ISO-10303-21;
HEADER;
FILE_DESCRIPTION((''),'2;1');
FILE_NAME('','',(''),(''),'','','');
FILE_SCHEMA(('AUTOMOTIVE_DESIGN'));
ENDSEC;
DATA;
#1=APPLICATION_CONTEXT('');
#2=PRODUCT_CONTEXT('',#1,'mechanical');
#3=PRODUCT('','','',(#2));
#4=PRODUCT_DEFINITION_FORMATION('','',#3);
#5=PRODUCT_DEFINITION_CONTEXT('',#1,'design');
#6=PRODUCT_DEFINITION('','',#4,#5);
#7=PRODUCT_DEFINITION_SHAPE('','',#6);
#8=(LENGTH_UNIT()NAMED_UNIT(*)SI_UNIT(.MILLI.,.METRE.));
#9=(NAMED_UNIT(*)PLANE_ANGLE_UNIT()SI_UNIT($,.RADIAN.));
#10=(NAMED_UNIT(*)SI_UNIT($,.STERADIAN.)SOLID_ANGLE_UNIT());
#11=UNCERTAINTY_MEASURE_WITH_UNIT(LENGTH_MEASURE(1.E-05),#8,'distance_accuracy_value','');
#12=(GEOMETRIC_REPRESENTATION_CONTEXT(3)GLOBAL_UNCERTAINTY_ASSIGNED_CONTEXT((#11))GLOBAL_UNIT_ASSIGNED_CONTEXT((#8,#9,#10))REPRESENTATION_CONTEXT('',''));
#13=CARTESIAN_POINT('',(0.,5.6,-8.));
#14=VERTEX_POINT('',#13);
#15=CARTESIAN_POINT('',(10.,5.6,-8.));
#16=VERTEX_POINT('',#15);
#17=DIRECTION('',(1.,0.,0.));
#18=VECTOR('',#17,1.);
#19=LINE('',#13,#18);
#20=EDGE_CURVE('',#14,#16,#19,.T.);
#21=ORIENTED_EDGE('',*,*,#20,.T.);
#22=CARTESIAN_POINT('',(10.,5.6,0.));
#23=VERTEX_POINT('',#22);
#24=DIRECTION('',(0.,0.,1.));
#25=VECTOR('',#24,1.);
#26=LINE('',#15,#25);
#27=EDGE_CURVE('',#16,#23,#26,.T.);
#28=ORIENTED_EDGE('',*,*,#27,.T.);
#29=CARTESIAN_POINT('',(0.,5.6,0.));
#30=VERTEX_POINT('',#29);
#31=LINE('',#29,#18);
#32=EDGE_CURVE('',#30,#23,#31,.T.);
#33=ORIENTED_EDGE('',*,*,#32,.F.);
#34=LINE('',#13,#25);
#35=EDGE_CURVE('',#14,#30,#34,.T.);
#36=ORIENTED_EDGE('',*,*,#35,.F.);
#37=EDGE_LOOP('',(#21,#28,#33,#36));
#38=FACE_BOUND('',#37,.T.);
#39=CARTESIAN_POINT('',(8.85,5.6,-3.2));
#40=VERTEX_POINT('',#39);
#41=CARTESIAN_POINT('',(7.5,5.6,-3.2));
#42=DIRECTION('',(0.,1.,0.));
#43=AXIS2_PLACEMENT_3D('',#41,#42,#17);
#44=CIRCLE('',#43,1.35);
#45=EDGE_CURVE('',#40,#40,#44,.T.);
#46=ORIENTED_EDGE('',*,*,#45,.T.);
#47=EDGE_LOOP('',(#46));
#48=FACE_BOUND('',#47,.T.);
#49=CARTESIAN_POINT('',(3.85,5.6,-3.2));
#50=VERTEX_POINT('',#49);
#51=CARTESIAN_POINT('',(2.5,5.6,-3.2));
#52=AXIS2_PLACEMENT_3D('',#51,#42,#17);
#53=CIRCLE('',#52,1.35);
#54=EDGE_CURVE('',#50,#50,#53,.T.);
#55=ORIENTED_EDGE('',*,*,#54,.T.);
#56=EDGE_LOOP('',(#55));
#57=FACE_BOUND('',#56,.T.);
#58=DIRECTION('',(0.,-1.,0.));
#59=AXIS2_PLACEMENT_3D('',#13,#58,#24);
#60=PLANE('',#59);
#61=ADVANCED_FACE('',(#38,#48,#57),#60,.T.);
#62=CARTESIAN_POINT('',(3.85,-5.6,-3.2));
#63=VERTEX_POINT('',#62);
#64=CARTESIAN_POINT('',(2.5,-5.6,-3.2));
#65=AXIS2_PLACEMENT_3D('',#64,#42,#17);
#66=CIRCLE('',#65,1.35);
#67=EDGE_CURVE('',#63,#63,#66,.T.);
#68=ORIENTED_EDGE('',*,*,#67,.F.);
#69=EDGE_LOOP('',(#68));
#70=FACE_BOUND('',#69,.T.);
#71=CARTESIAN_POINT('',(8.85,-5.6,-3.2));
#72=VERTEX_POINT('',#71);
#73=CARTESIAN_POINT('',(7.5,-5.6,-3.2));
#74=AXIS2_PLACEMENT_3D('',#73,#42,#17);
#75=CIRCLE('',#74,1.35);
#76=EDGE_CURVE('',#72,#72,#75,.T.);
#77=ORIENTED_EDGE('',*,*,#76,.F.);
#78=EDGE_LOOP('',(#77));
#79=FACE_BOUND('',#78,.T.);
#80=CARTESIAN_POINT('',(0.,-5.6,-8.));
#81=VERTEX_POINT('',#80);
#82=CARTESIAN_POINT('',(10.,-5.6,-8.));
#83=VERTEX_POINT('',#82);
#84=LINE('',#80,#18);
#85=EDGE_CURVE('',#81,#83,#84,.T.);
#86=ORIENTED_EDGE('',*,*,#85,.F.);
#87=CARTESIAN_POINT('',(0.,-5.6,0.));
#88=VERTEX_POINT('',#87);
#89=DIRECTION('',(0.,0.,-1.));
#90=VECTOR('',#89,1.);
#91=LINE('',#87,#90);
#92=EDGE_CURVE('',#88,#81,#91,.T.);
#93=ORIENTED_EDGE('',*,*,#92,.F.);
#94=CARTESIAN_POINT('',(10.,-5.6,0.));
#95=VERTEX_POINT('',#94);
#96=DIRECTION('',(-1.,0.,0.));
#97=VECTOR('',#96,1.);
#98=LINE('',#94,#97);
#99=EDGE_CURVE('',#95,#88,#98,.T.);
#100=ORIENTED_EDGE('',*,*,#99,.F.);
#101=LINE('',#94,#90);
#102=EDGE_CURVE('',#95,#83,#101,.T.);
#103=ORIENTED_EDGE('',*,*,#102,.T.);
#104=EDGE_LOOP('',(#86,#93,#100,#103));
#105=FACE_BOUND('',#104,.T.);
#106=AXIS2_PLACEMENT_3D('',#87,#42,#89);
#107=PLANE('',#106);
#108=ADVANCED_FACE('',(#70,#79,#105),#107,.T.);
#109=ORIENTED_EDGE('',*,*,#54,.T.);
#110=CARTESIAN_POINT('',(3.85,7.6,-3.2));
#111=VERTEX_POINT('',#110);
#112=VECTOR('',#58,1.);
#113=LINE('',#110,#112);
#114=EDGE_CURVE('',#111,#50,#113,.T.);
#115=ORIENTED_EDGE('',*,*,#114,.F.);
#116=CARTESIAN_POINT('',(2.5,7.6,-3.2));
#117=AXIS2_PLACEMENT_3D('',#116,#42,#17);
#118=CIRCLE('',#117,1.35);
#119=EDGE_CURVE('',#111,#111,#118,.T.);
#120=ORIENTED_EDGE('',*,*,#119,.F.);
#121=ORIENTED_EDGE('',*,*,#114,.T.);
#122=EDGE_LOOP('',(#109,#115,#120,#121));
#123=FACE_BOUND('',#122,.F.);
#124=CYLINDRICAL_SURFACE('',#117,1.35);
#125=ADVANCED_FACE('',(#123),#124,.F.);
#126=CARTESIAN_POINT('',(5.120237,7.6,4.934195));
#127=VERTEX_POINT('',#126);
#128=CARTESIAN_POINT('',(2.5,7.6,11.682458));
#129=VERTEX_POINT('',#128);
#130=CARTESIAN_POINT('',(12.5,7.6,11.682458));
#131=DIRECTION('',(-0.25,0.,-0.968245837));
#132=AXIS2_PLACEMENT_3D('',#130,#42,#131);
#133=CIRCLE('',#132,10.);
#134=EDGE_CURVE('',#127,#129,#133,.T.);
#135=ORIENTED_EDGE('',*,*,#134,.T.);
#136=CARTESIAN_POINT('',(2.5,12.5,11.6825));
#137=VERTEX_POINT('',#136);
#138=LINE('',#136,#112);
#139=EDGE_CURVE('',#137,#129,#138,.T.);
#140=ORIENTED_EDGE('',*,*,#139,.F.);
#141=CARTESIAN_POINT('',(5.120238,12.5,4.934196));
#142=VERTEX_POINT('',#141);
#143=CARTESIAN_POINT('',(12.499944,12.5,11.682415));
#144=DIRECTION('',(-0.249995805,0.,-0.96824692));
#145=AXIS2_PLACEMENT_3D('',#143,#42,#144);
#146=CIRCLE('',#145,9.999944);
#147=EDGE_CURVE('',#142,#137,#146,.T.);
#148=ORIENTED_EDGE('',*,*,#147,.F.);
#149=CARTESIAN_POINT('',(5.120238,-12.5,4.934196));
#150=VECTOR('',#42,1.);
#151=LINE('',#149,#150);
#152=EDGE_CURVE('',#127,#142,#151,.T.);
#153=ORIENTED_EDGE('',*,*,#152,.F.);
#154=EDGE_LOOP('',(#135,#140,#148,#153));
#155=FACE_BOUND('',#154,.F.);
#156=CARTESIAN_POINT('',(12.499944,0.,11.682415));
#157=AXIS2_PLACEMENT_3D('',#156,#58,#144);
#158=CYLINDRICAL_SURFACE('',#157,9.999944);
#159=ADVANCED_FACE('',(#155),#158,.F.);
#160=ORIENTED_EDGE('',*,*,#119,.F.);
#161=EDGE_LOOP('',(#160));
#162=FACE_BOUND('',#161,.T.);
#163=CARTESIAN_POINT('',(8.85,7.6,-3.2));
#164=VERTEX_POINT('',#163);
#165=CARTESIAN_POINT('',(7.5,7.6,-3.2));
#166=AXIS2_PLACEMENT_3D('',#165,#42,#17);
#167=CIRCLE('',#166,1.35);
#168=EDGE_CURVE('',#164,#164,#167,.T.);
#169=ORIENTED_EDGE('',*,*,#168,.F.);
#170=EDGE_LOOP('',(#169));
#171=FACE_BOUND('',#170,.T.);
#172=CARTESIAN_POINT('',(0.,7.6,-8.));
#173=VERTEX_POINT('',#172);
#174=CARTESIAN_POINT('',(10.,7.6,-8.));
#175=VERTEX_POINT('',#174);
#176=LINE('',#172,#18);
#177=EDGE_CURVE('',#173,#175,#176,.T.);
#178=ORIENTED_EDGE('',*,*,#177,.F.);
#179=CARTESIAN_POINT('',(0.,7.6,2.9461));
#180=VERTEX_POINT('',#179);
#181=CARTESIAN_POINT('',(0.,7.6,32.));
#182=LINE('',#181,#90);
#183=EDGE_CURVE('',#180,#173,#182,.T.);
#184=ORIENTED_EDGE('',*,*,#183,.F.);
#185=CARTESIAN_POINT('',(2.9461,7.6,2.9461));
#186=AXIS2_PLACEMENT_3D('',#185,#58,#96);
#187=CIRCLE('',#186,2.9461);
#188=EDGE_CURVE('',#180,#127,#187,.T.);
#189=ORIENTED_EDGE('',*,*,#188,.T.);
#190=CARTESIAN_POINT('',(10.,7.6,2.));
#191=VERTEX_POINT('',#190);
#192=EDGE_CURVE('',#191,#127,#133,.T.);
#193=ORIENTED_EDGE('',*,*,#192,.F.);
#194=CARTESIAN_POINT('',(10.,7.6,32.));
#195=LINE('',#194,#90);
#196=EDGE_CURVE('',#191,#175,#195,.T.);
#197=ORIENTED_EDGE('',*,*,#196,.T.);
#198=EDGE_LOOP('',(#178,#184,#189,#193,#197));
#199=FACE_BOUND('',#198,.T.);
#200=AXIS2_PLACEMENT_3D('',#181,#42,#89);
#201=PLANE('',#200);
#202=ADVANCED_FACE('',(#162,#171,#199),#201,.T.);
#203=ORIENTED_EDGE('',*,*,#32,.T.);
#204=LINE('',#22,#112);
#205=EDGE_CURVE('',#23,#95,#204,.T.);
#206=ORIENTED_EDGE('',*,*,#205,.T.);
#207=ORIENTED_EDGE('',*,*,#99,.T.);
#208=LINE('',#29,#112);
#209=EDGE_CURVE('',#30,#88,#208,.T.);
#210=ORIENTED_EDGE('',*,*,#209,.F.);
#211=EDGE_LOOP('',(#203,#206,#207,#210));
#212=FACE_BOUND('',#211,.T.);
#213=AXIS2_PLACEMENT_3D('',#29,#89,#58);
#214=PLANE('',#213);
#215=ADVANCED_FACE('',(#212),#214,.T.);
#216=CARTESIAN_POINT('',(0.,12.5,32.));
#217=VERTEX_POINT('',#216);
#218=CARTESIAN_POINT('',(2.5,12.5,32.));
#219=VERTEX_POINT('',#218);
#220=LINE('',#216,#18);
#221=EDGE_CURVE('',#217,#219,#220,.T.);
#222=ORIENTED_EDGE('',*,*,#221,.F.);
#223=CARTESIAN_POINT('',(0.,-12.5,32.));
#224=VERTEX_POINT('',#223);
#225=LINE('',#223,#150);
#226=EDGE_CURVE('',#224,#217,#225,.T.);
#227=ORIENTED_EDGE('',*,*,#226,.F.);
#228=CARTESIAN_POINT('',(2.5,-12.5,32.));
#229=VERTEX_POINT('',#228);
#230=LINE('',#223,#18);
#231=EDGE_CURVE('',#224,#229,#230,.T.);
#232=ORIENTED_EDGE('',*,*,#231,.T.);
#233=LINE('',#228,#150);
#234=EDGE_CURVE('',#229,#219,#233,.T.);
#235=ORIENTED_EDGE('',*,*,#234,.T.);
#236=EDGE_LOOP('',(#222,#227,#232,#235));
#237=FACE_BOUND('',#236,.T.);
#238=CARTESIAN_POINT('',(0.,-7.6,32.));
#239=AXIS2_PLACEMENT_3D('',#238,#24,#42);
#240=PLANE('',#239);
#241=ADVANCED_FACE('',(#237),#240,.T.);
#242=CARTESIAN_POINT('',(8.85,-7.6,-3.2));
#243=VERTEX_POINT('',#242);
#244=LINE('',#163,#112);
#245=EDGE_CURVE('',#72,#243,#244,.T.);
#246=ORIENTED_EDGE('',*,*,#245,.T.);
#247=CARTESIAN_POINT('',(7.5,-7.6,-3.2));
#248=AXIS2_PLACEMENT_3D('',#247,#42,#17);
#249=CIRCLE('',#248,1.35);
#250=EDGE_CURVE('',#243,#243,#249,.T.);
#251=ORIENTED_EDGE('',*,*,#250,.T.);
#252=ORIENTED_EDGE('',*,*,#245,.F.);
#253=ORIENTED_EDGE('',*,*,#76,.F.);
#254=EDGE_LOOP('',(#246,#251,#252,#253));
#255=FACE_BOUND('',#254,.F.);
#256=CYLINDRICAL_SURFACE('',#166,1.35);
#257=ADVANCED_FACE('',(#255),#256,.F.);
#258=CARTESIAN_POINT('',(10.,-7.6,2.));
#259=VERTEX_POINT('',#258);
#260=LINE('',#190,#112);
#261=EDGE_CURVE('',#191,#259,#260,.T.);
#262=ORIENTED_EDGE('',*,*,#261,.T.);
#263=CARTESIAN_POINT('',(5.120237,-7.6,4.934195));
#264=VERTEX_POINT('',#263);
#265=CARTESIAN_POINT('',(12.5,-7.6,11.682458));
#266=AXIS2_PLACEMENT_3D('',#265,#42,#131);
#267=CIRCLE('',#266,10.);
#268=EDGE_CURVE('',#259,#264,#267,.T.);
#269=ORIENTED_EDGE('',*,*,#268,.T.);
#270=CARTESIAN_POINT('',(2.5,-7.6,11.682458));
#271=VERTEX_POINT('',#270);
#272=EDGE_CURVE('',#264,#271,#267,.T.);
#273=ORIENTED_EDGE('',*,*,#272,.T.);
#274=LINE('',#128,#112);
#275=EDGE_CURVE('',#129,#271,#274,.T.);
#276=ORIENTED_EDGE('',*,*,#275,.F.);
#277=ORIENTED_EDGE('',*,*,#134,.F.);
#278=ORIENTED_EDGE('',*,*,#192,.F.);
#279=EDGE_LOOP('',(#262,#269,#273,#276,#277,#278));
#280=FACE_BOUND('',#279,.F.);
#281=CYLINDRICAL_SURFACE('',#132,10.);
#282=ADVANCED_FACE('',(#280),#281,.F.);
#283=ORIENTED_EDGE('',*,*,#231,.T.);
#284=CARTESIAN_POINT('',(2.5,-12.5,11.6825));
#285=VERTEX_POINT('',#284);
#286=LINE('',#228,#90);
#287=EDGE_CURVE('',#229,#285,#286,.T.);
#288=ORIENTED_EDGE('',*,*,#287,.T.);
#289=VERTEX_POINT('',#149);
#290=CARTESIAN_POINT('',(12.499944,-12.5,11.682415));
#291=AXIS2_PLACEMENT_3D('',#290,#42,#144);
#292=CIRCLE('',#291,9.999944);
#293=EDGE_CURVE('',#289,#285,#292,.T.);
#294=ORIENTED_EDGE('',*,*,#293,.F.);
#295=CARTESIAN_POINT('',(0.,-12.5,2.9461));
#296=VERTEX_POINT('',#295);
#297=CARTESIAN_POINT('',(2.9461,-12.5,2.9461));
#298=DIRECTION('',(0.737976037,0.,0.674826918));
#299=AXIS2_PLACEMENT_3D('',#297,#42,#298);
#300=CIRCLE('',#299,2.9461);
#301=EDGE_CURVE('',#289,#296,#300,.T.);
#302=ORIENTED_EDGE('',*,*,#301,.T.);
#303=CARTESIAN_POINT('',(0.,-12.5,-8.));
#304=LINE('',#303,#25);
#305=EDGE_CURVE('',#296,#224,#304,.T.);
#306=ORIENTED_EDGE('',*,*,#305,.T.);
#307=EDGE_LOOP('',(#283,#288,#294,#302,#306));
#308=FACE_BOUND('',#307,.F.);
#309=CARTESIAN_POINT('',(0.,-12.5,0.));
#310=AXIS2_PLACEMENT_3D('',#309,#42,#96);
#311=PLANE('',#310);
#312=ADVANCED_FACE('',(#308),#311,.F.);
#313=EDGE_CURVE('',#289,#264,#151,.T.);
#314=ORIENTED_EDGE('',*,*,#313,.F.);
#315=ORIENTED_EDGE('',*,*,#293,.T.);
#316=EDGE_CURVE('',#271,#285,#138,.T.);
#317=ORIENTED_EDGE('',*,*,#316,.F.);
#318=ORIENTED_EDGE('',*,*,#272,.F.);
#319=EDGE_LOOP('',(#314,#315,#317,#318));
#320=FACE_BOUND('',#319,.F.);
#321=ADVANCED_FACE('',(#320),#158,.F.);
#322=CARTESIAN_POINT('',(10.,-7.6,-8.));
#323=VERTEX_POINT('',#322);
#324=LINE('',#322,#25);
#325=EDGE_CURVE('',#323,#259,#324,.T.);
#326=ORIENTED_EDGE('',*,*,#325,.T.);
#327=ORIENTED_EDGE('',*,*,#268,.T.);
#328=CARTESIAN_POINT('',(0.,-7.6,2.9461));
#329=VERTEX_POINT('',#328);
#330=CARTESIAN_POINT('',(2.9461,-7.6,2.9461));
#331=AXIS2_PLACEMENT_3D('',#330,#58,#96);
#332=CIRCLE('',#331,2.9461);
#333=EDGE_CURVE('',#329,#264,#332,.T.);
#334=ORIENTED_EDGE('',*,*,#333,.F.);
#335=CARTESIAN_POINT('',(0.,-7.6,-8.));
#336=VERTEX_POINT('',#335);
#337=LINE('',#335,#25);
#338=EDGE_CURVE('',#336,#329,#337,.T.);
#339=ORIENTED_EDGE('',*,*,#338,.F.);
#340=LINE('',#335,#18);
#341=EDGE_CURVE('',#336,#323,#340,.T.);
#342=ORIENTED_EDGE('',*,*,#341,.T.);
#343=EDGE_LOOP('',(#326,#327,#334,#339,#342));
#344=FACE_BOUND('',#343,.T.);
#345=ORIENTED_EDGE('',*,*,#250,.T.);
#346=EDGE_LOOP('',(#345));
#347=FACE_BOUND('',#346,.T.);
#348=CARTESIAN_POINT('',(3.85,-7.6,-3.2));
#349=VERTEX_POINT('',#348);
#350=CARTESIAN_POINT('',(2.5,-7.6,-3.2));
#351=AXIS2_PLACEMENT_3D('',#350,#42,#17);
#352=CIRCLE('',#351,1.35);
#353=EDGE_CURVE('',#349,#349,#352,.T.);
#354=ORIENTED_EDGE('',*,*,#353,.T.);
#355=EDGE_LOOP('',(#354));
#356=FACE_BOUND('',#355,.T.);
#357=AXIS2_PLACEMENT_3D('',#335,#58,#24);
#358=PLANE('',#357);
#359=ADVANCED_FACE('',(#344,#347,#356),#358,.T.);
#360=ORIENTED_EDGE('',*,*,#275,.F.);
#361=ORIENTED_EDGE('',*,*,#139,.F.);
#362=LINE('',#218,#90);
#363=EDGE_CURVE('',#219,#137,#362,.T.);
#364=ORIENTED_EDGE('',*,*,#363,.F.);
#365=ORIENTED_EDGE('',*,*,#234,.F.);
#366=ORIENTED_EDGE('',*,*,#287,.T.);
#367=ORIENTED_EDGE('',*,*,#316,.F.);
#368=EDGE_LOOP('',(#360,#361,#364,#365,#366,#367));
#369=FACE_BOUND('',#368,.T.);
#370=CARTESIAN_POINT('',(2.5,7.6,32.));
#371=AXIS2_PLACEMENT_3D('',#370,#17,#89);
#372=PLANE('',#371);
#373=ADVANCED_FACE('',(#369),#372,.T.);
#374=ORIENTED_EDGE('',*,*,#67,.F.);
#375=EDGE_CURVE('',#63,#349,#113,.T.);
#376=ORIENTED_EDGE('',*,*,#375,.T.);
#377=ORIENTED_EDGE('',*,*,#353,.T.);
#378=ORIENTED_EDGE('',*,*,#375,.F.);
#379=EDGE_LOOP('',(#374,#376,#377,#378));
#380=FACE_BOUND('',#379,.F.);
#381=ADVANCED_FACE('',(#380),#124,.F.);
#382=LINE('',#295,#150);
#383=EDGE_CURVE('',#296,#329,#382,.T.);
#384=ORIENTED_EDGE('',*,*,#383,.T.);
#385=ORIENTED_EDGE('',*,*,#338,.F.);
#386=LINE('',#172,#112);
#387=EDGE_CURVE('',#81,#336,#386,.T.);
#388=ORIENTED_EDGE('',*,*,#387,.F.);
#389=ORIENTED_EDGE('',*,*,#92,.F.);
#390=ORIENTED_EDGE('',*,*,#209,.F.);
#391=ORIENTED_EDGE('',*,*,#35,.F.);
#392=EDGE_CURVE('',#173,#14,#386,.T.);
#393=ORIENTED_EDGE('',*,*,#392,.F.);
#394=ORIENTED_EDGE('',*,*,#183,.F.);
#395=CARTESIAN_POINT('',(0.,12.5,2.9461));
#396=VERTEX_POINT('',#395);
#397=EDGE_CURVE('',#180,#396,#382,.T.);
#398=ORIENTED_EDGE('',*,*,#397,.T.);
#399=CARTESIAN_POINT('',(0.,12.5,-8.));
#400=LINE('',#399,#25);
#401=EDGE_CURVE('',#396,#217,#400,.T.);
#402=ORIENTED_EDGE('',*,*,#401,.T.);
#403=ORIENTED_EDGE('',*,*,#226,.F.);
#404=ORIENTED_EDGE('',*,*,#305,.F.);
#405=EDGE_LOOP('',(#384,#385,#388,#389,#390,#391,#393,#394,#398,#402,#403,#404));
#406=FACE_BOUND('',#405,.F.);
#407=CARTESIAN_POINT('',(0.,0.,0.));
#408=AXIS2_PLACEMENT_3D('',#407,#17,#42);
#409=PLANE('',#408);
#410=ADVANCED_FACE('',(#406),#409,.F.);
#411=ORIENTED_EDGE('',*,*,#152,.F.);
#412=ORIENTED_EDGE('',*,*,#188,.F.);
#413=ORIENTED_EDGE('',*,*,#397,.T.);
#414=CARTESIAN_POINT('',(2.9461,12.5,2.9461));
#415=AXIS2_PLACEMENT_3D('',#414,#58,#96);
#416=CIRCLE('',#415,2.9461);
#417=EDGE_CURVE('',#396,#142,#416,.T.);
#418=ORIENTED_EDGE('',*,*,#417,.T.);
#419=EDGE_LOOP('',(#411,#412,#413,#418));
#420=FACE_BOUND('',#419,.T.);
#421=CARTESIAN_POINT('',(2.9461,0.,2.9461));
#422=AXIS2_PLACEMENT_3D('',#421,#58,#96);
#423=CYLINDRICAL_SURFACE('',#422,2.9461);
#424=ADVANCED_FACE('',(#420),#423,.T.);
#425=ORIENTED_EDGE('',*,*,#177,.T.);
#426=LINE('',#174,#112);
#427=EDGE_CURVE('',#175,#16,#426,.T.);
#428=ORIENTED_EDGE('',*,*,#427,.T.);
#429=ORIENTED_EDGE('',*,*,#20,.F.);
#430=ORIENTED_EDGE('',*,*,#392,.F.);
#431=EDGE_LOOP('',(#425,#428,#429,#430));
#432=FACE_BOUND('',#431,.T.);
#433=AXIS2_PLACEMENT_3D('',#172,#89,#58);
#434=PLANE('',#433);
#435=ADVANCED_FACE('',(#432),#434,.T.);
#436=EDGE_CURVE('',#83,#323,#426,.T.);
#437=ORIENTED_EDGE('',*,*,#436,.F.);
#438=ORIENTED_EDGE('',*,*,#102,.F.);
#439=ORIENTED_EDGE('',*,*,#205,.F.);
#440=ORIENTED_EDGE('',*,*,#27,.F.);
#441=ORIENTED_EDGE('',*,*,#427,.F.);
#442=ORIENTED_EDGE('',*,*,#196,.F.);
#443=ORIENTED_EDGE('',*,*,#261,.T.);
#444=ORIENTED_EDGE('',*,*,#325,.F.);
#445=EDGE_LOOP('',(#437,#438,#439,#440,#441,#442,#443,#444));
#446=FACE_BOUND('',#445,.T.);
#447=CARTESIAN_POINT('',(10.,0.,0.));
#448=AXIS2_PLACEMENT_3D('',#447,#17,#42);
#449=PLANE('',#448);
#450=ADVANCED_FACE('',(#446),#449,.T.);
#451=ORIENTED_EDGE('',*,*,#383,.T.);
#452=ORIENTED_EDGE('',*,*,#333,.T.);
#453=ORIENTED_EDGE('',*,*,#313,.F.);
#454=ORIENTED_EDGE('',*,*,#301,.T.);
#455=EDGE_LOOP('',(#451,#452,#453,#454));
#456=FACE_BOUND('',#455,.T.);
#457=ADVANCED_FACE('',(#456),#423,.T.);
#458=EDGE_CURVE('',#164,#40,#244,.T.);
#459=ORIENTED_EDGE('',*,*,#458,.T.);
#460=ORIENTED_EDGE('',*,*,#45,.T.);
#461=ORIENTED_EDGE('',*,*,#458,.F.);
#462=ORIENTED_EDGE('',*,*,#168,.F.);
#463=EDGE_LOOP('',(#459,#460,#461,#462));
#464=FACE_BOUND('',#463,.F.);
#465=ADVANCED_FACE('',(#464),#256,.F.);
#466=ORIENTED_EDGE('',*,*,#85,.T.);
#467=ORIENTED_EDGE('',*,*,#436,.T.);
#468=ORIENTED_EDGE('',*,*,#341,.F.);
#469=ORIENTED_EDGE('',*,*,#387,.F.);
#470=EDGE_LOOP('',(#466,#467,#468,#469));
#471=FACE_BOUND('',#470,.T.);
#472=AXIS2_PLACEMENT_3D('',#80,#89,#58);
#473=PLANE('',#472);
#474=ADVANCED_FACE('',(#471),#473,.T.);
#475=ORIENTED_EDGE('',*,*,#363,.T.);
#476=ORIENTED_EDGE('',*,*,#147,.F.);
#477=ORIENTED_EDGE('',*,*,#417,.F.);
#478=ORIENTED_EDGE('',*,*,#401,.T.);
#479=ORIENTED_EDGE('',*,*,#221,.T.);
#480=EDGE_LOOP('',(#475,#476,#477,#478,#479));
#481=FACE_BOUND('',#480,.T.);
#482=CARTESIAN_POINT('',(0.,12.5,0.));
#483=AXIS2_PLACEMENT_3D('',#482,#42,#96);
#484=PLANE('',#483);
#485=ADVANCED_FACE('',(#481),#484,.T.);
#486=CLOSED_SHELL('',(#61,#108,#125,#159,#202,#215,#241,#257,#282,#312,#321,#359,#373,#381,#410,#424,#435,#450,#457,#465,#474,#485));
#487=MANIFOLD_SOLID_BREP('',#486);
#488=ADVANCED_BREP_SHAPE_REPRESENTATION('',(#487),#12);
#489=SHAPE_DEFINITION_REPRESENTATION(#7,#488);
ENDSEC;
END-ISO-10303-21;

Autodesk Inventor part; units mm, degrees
ref_plane "YZ Plane" through (0, 0, 0) normal (1, 0, 0) x (0, 1, 0)
ref_plane "XZ Plane" through (0, 0, 0) normal (0, 1, 0) x (-1, 0, 0)
ref_plane "XY Plane" through (0, 0, 0) normal (0, 0, 1) x (1, 0, 0)
sketch "スケッチ1" plane through (0, 0, 0) normal (1, 0, 0) x (0, 1, 0)
  line L0 (5.6, 0) -> (-5.6, 0)
  line L1 (-5.6, 0) -> (-5.6, -8)
  line L2 (-5.6, -8) -> (5.6, -8)
  line L3 (5.6, -8) -> (5.6, 0)
  line L4 (7.6, -8) -> (-7.6, -8)
  line L5 (-7.6, -8) -> (-7.6, 32)
  line L6 (-7.6, 32) -> (7.6, 32)
  line L7 (7.6, 32) -> (7.6, -8)
  point P0 (0, 0)
  point P1 (0, -8)
  dimension "d0" = 11.2
  dimension "d1" = 8
  dimension "d2" = 15.2
  dimension "d3" = 40
extrude "押し出し1" add sketch "スケッチ1" along normal blind 10 contours L0 L1 L4 L5 L6 L7 L3
sketch "スケッチ2" plane through (0, 7.6, 32) normal (0, 1, 0) x (1, 0, 0)
  circle A0 centre (2.5, 35.2) radius 1.35
  circle A1 centre (7.5, 35.2) radius 1.35
  line L0 (0, 40) -> (0, 0) projected
  line L1 (10, 40) -> (10, 0) projected
  line L2 (0, 32) -> (10, 32) projected
  dimension "d6" = 2.7
  dimension "d7" = 2.7
  dimension "d8" = 2.5
  dimension "d9" = 2.5
  dimension "d10" = 3.2
extrude "押し出し2" cut sketch "スケッチ2" against normal through all
sketch "スケッチ3" plane through (0, 7.6, 32) normal (0, 1, 0) x (1, 0, 0)
  line L0 (10, 0) -> (2.5, 0)
  line L1 (2.5, 0) -> (2.5, 30)
  line L2 (2.5, 30) -> (10, 30)
  line L3 (10, 30) -> (10, 0)
  line L4 (0, 40) -> (0, 0) projected
  point P0 (0, 32)
  dimension "d13" = 2.5
  dimension "d14" = 30
extrude "押し出し3" cut sketch "スケッチ3" against normal through all
fillet "フィレット1" radius 10 1 edges at (2.5, 0, 2)
sketch "スケッチ4" plane through (0, 0, 0) normal (0, 1, 0) x (-1, 0, 0)
  line L0 (0, -8) -> (-10, -8) projected
  line L1 (0, -8) -> (0, 32) projected
  line L2 (0, 32) -> (-2.5, 32) projected
  line L3 (-2.5, 32) -> (-2.5, 11.6825) projected
  circle A0 centre (-2.5, -3.2) radius 1.35 projected
  circle A1 centre (-2.9461, 2.9461) radius 2.9461
  line L4 (0, 0) -> (-10, 0) projected
  line L5 (-10, -8) -> (-10, 2) projected
  arc A2 (-10, 2) -> (-2.5, 11.6825) centre (-12.5, 11.6825) ccw projected
  point P0 (0, 2.9461)
  point P1 (-2.5, 5.8582)
  point P2 (-2.5, 0.034)
  point P3 (-5.1202, 4.9342)
extrude "押し出し4" add sketch "スケッチ4" along normal mid plane 25 contours A1 A2 L3 L2 L1 | A1
properties part number "hand_finger"
